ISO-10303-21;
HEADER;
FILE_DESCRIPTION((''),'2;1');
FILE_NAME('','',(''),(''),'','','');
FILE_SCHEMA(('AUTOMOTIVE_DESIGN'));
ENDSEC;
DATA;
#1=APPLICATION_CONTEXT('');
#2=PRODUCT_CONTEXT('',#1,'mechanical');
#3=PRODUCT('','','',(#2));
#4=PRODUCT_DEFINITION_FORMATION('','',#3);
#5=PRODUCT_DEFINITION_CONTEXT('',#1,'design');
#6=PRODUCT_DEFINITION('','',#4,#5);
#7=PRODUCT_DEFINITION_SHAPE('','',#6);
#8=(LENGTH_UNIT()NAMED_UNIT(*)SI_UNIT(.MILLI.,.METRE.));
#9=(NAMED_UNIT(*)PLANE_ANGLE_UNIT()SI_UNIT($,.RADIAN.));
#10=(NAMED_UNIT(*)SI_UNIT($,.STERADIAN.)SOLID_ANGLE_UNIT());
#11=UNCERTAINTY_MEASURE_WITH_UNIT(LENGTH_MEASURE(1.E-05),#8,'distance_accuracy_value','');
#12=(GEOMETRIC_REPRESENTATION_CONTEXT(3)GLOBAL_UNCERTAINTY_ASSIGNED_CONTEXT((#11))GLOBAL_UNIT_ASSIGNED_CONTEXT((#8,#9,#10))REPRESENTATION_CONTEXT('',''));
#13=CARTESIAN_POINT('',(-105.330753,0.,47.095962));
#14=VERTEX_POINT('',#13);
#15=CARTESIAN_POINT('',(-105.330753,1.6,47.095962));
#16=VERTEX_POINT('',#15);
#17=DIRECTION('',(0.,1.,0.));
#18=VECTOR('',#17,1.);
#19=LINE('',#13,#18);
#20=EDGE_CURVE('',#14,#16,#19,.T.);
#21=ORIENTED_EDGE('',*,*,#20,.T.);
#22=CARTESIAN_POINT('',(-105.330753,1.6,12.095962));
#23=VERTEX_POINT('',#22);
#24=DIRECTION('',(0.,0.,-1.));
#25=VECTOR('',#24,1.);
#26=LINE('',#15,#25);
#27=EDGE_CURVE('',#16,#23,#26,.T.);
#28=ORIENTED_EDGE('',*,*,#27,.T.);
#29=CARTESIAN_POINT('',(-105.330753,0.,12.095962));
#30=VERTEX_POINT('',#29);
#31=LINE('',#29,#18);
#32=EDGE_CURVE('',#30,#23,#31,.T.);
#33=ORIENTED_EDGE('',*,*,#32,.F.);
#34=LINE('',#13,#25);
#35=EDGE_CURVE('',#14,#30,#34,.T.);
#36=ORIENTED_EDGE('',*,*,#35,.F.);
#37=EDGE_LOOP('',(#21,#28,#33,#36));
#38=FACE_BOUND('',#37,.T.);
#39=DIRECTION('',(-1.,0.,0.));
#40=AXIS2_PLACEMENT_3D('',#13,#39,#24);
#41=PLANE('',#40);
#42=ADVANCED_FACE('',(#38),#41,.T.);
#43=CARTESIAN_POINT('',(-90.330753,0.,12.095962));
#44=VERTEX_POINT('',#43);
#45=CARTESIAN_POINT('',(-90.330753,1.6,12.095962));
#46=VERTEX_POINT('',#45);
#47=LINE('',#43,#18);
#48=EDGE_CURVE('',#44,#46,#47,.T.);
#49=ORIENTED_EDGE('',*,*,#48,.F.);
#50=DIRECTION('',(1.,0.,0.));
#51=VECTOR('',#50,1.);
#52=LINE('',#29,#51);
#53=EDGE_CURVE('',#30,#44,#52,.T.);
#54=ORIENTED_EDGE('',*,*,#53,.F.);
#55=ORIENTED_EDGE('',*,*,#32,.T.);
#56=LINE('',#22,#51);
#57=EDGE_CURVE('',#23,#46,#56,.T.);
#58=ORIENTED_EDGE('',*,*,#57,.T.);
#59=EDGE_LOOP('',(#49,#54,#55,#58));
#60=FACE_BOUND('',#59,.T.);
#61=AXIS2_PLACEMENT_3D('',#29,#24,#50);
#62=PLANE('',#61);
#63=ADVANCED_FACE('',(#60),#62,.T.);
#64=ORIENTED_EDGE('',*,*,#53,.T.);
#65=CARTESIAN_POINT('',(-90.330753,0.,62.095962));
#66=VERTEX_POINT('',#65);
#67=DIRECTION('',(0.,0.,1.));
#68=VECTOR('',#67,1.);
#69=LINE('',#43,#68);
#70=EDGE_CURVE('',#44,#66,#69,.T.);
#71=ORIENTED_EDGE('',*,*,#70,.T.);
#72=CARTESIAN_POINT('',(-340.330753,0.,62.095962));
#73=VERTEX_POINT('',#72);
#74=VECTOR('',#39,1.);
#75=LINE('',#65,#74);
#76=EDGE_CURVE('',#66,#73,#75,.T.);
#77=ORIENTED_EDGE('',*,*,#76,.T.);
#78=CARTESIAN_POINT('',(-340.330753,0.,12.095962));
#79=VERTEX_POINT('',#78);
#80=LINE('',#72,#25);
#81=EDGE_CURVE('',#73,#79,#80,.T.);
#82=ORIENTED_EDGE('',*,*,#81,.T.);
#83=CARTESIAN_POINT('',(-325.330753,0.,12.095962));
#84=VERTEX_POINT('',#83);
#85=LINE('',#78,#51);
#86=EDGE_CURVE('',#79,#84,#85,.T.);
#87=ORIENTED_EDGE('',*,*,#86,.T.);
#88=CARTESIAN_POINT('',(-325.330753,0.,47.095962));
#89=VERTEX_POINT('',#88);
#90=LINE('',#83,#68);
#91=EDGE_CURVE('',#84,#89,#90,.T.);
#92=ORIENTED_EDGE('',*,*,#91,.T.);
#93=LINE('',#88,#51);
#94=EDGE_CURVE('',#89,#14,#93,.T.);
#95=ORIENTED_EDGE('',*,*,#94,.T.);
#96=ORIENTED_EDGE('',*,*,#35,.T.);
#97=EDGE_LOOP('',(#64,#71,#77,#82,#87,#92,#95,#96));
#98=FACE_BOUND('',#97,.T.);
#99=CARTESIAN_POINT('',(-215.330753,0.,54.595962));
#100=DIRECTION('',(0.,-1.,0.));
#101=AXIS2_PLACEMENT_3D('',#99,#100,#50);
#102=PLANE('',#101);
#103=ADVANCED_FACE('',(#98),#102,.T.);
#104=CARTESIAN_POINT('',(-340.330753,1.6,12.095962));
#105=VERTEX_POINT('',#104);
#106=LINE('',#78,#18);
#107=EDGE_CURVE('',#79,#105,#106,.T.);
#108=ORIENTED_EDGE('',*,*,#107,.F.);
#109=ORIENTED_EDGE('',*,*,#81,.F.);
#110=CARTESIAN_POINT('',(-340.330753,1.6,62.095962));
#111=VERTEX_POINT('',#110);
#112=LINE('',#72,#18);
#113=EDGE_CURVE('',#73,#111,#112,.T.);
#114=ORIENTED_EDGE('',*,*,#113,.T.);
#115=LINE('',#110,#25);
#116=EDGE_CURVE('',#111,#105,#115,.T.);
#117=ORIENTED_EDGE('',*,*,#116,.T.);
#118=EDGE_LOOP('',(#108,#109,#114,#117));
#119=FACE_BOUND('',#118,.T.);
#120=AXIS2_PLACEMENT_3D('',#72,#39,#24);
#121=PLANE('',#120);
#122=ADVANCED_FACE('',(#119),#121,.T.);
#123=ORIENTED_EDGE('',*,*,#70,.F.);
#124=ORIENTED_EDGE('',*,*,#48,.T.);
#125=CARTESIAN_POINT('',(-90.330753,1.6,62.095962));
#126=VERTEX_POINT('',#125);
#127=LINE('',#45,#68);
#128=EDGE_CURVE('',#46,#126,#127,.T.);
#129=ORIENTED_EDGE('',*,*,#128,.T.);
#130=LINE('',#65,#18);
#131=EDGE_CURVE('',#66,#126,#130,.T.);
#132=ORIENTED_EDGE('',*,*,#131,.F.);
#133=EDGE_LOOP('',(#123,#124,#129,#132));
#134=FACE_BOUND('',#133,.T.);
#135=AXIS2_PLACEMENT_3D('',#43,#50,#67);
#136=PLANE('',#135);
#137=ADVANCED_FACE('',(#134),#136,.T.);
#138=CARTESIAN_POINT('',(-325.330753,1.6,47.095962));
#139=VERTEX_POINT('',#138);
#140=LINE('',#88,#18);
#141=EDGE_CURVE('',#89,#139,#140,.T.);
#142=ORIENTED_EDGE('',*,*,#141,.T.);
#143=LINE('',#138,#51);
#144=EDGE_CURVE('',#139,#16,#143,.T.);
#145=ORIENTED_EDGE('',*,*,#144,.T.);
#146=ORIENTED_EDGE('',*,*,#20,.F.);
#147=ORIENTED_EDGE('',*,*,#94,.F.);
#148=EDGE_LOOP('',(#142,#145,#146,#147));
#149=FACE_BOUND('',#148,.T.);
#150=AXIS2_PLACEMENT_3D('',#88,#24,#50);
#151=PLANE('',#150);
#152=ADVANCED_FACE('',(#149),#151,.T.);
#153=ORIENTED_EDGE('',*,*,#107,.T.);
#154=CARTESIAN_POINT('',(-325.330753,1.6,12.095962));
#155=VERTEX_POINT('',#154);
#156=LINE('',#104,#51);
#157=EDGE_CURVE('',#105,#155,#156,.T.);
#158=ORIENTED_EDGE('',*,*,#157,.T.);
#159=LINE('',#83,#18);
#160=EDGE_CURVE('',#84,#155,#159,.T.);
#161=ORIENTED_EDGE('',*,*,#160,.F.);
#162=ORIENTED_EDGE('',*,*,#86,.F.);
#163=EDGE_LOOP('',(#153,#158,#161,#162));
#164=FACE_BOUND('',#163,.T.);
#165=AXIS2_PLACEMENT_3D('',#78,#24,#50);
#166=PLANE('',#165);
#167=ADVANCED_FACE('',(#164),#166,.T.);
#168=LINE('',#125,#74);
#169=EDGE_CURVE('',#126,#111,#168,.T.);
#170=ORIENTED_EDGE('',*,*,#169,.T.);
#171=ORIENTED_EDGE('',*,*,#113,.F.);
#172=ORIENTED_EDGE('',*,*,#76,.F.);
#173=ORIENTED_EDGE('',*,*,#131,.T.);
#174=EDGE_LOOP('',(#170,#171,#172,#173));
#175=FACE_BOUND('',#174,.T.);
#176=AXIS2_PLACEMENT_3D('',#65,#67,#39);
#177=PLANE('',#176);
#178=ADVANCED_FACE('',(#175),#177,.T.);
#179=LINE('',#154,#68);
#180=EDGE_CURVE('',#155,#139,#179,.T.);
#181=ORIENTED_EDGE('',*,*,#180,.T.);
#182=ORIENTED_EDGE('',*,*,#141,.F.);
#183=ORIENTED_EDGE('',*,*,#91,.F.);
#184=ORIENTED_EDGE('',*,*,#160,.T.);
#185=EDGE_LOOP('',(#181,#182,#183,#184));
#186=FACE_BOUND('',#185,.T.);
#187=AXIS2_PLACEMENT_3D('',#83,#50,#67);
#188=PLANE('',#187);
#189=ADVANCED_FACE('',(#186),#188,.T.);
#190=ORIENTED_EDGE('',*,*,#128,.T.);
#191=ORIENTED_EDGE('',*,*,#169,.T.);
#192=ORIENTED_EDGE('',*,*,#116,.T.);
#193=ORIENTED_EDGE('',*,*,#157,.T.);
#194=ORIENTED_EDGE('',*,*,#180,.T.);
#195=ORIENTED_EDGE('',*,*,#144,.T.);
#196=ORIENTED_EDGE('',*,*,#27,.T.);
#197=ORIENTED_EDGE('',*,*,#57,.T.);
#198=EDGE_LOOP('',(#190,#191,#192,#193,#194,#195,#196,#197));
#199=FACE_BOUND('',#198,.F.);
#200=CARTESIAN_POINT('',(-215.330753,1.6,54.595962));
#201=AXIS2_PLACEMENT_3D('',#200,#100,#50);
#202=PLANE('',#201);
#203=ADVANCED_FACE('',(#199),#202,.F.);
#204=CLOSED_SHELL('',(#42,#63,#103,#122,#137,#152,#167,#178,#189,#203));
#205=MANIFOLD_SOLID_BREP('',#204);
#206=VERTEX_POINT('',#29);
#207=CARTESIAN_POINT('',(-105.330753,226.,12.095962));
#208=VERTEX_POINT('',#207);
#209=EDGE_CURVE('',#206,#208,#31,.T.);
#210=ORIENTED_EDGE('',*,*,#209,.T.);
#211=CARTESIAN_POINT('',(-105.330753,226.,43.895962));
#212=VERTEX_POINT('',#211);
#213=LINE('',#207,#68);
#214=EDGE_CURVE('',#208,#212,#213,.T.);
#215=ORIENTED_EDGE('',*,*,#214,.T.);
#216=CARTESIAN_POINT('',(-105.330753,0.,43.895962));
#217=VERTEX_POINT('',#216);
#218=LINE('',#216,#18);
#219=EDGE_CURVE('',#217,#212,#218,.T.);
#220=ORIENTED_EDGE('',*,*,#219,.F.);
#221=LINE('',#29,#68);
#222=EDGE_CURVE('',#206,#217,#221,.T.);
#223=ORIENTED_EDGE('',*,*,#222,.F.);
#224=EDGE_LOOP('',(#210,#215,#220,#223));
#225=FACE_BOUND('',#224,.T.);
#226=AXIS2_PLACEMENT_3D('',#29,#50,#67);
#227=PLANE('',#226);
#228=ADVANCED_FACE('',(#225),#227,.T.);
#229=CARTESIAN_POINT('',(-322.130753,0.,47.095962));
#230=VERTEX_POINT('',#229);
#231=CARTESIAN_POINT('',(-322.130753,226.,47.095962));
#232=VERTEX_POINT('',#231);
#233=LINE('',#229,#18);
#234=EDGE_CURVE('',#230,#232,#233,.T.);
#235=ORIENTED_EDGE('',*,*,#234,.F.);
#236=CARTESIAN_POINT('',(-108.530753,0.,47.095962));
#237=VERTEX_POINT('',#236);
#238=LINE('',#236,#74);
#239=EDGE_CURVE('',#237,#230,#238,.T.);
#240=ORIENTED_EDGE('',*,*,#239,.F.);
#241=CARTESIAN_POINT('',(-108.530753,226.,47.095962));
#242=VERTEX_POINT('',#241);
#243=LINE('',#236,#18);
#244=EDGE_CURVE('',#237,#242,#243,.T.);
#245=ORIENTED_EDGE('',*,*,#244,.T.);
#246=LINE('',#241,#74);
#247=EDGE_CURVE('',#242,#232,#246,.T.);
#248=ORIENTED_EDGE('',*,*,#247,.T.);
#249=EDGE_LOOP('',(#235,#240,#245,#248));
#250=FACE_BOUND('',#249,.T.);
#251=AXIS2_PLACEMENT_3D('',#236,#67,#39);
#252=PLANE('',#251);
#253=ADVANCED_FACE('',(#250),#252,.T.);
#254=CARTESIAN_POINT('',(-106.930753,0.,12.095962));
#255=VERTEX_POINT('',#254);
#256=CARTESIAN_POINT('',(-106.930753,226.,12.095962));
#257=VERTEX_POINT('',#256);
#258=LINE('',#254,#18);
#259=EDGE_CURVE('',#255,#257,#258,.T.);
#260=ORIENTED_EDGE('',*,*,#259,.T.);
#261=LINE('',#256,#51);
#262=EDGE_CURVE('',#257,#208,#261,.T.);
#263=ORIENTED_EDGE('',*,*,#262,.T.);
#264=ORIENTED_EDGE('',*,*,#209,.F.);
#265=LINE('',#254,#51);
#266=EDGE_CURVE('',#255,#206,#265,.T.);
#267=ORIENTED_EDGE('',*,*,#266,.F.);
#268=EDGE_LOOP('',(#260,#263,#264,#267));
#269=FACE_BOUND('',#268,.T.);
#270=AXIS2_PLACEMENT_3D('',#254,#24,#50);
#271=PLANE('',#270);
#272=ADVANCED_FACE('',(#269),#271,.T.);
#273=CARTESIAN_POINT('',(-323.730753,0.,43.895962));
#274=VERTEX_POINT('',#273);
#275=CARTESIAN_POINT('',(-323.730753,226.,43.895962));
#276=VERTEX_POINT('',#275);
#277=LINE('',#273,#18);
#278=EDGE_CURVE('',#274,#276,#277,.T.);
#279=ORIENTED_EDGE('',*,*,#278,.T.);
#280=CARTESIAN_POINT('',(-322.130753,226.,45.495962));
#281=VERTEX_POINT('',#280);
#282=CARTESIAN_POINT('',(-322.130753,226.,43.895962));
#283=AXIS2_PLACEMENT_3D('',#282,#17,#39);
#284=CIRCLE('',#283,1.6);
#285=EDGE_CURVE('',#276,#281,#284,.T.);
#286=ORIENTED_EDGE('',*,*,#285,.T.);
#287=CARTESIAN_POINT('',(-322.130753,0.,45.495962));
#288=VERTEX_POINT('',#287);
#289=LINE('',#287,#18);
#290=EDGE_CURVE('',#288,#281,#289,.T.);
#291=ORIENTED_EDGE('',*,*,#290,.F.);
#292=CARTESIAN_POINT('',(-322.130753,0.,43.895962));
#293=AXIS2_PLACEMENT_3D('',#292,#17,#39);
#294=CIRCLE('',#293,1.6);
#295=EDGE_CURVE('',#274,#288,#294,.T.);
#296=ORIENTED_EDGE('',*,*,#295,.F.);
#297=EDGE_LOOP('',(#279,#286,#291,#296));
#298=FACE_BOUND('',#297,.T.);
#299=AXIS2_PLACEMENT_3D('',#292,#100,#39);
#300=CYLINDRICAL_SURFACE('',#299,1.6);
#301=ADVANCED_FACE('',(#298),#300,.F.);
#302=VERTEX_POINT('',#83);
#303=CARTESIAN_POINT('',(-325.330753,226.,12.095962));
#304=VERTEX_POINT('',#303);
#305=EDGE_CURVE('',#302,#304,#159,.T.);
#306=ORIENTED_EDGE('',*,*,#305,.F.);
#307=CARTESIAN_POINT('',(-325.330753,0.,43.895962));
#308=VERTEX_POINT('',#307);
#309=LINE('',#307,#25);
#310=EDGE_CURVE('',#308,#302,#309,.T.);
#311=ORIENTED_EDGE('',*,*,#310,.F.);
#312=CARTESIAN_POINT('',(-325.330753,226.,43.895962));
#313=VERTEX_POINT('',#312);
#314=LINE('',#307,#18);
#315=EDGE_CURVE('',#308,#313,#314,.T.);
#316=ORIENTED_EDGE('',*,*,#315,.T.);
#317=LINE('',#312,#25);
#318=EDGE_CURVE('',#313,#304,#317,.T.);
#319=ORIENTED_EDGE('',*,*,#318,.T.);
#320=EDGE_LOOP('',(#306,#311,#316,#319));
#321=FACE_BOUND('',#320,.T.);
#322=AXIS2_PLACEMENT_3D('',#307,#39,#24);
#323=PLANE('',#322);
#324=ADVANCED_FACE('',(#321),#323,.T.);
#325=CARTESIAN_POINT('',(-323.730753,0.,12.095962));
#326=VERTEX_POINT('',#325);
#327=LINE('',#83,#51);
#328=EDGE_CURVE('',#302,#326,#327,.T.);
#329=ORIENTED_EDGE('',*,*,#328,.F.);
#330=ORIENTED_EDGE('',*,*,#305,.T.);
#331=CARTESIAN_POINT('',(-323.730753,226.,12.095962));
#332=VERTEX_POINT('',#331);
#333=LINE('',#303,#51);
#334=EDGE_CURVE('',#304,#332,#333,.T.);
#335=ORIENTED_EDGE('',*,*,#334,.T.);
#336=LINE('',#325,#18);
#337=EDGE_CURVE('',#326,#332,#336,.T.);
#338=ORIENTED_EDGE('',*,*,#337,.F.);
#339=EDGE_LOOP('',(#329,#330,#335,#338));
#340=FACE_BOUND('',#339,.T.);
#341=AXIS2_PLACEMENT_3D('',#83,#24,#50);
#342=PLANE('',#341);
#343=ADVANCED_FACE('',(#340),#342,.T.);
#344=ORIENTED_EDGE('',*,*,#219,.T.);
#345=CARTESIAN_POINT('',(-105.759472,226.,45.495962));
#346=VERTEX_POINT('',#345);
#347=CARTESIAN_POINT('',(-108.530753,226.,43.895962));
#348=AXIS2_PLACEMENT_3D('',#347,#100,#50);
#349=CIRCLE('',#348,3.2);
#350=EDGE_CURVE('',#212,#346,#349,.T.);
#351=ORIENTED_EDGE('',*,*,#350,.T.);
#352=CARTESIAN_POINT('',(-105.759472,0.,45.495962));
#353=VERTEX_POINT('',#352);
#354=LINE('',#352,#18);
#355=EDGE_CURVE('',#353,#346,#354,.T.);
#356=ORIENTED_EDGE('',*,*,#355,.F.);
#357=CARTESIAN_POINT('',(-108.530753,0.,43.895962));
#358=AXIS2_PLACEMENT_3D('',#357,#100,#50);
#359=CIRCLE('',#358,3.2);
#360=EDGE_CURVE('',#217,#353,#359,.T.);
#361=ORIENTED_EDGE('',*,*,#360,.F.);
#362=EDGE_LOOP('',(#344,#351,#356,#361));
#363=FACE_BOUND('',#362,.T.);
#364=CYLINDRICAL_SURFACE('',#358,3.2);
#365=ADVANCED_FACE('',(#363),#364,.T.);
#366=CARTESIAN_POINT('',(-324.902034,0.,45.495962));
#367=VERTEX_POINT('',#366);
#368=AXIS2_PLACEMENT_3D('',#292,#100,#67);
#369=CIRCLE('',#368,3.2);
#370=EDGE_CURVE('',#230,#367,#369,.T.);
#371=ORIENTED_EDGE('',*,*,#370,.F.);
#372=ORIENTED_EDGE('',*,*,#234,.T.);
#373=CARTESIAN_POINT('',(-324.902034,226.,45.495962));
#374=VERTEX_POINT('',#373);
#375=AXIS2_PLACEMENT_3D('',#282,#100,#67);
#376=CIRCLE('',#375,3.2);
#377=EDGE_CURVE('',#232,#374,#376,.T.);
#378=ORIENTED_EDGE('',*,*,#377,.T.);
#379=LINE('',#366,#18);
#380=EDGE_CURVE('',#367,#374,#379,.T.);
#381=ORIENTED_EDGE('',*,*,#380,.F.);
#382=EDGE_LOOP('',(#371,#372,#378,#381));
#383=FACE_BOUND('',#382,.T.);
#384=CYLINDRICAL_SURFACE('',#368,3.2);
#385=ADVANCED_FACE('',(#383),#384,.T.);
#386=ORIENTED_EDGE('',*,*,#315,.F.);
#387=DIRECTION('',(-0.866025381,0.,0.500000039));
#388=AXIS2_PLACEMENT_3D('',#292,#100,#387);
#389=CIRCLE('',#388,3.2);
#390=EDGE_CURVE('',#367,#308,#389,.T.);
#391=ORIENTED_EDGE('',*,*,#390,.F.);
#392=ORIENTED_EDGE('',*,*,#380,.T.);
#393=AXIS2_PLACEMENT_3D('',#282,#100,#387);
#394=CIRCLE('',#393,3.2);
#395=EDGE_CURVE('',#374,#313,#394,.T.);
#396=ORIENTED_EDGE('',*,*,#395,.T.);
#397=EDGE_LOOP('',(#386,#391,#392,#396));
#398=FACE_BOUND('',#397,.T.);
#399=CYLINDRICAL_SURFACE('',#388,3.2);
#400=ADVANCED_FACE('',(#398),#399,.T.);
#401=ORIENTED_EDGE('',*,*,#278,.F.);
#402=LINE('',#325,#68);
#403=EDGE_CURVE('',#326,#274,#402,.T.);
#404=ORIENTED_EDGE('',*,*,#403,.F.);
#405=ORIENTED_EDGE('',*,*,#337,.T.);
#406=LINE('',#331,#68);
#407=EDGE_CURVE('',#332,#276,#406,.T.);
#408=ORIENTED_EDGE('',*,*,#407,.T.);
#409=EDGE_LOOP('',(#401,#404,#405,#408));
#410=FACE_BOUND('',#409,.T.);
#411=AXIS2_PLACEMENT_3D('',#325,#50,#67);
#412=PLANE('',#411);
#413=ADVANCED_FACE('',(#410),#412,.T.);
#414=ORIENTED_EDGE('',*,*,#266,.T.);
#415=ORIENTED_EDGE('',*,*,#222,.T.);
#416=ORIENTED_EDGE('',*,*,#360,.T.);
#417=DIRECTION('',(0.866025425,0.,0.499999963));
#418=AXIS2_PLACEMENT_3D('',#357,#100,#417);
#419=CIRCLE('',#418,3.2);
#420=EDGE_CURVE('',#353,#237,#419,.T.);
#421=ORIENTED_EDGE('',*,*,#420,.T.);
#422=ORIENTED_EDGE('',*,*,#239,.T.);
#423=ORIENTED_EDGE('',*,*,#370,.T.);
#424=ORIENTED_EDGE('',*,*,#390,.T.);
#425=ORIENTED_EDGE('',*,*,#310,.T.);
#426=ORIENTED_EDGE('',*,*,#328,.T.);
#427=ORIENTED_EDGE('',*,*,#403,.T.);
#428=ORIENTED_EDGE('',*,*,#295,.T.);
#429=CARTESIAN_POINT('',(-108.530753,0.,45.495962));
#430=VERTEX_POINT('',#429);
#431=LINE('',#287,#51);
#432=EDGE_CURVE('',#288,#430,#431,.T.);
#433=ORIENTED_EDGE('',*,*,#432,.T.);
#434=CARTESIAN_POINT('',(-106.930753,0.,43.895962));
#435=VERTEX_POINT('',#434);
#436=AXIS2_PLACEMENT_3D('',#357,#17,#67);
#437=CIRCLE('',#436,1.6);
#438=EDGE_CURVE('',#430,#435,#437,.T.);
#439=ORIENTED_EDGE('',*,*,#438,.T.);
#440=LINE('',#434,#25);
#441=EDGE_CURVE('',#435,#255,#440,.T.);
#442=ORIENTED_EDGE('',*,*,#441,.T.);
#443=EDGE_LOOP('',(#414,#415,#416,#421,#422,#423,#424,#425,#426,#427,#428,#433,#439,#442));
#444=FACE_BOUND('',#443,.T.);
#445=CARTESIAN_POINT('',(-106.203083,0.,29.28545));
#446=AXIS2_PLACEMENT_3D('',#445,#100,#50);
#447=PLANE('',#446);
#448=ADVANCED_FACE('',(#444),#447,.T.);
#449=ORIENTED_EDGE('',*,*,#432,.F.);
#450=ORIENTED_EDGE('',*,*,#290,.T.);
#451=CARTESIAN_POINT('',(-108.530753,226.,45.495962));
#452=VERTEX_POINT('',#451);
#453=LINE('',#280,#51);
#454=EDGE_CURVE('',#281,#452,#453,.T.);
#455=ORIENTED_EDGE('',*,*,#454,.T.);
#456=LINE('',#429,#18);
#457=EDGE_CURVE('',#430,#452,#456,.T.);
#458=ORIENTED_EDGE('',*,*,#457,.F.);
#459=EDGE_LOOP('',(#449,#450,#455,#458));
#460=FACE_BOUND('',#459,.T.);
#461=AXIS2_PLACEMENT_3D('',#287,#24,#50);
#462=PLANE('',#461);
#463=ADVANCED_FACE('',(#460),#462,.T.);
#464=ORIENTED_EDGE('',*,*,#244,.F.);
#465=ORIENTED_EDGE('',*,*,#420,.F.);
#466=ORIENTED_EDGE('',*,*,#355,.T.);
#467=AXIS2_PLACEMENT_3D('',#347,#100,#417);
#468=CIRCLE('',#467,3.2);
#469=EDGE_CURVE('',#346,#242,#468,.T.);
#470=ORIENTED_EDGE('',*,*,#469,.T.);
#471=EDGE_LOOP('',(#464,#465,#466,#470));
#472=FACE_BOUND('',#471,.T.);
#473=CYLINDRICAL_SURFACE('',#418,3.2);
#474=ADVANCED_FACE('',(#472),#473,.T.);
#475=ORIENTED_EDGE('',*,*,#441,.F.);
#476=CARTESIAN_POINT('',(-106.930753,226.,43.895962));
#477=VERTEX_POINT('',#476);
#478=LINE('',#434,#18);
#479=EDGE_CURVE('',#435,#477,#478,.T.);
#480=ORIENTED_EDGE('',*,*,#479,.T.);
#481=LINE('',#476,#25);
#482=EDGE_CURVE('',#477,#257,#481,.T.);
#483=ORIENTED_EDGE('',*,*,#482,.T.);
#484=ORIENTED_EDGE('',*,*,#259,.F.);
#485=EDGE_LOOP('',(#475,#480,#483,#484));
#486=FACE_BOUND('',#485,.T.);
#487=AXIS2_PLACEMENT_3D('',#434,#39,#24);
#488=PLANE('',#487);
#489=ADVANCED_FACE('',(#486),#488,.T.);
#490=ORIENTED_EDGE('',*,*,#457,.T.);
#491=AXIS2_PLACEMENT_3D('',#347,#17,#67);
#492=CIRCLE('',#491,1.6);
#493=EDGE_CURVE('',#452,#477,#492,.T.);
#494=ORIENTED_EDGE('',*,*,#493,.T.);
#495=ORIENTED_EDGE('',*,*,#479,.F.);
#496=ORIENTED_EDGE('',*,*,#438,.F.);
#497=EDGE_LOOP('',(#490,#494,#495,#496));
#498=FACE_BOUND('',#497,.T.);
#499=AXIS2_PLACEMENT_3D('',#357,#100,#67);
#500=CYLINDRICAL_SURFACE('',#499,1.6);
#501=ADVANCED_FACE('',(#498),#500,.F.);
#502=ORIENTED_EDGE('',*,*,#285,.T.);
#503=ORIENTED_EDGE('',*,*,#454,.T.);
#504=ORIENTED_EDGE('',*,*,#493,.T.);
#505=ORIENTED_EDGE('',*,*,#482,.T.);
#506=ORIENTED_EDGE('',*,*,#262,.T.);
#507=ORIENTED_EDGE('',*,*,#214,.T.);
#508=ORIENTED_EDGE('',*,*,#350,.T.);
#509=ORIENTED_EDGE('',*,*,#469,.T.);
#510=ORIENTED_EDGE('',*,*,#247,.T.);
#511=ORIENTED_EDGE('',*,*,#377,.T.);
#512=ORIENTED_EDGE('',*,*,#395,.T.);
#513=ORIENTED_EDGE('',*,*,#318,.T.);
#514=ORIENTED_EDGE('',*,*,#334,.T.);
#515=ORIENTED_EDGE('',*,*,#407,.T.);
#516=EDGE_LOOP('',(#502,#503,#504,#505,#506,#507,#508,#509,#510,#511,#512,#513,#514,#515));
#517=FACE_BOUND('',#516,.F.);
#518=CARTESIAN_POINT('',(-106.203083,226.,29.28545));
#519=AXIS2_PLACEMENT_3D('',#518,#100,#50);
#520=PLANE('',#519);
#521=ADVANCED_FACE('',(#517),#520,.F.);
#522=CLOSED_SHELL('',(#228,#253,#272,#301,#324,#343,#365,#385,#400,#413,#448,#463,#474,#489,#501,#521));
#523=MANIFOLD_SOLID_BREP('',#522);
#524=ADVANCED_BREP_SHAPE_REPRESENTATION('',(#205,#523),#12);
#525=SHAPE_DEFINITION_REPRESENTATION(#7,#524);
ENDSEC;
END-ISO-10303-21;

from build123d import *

# Parameters (mm, degrees)
F1_DEPTH = 1.6
F2_DEPTH = 226


# Not quite as in the source:
# - ends of sketch curves that miss each other by under 0.0002 mm in the source are joined


with BuildPart() as f1:
    # F0 (on Front) → F1 (new body)
    with BuildSketch(Plane.XZ):
        Polygon((-105.330753, 62.095962), (-325.330753, 62.095962), (-325.330753, 47.095962), (-322.130753, 47.095962), (-108.530753, 47.095962), (-105.330753, 47.095962), align=None)
        Polygon((-90.330753, 62.095962), (-105.330753, 62.095962), (-105.330753, 47.095962), (-105.330753, 45.495962), (-105.330753, 43.895962), (-105.330753, 12.095962), (-90.330753, 12.095962), align=None)
        Polygon((-325.330753, 47.095962), (-325.330753, 62.095962), (-340.330753, 62.095962), (-340.330753, 12.095962), (-325.330753, 12.095962), (-325.330753, 43.895962), (-325.330753, 45.495962), align=None)
    extrude(amount=-F1_DEPTH)


with BuildPart() as f2:
    # F0 (on Front) → F2 (new body)
    with BuildSketch(Plane.XZ):
        with BuildLine():
            ThreePointArc((-105.330753, 43.895962), (-105.4397903748, 44.7241830149), (-105.7594717809, 45.4959621265))
            Line((-105.7594717809, 45.4959621265), (-108.530753, 45.495962))
            ThreePointArc((-108.530753, 45.495962), (-107.3993821501, 45.0273328499), (-106.930753, 43.895962))
            Line((-106.930753, 43.895962), (-106.930753, 12.095962))
            Line((-106.930753, 12.095962), (-105.330753, 12.095962))
            Line((-105.330753, 12.095962), (-105.330753, 43.895962))
        make_face()
        with BuildLine():
            Line((-108.530753, 47.095962), (-322.130753, 47.095962))
            ThreePointArc((-322.130753, 47.095962), (-323.7307529368, 46.6672433286), (-324.9020342191, 45.4959621265))
            Line((-324.9020342191, 45.4959621265), (-322.130753, 45.495962))
            Line((-322.130753, 45.495962), (-108.530753, 45.495962))
            Line((-108.530753, 45.495962), (-105.7594717809, 45.495962))
            ThreePointArc((-105.7594717809, 45.495962), (-106.9307530632, 46.6672433286), (-108.530753, 47.095962))
        make_face()
        with BuildLine():
            ThreePointArc((-324.9020342191, 45.4959621265), (-325.2217156252, 44.7241830149), (-325.330753, 43.895962))
            Line((-325.330753, 43.895962), (-325.330753, 12.095962))
            Line((-325.330753, 12.095962), (-323.730753, 12.095962))
            Line((-323.730753, 12.095962), (-323.730753, 43.895962))
            ThreePointArc((-323.730753, 43.895962), (-323.2621238499, 45.0273328499), (-322.130753, 45.495962))
            Line((-322.130753, 45.495962), (-324.9020342191, 45.4959621265))
        make_face()
    extrude(amount=-F2_DEPTH)


solid = Compound([f1.part, f2.part])
